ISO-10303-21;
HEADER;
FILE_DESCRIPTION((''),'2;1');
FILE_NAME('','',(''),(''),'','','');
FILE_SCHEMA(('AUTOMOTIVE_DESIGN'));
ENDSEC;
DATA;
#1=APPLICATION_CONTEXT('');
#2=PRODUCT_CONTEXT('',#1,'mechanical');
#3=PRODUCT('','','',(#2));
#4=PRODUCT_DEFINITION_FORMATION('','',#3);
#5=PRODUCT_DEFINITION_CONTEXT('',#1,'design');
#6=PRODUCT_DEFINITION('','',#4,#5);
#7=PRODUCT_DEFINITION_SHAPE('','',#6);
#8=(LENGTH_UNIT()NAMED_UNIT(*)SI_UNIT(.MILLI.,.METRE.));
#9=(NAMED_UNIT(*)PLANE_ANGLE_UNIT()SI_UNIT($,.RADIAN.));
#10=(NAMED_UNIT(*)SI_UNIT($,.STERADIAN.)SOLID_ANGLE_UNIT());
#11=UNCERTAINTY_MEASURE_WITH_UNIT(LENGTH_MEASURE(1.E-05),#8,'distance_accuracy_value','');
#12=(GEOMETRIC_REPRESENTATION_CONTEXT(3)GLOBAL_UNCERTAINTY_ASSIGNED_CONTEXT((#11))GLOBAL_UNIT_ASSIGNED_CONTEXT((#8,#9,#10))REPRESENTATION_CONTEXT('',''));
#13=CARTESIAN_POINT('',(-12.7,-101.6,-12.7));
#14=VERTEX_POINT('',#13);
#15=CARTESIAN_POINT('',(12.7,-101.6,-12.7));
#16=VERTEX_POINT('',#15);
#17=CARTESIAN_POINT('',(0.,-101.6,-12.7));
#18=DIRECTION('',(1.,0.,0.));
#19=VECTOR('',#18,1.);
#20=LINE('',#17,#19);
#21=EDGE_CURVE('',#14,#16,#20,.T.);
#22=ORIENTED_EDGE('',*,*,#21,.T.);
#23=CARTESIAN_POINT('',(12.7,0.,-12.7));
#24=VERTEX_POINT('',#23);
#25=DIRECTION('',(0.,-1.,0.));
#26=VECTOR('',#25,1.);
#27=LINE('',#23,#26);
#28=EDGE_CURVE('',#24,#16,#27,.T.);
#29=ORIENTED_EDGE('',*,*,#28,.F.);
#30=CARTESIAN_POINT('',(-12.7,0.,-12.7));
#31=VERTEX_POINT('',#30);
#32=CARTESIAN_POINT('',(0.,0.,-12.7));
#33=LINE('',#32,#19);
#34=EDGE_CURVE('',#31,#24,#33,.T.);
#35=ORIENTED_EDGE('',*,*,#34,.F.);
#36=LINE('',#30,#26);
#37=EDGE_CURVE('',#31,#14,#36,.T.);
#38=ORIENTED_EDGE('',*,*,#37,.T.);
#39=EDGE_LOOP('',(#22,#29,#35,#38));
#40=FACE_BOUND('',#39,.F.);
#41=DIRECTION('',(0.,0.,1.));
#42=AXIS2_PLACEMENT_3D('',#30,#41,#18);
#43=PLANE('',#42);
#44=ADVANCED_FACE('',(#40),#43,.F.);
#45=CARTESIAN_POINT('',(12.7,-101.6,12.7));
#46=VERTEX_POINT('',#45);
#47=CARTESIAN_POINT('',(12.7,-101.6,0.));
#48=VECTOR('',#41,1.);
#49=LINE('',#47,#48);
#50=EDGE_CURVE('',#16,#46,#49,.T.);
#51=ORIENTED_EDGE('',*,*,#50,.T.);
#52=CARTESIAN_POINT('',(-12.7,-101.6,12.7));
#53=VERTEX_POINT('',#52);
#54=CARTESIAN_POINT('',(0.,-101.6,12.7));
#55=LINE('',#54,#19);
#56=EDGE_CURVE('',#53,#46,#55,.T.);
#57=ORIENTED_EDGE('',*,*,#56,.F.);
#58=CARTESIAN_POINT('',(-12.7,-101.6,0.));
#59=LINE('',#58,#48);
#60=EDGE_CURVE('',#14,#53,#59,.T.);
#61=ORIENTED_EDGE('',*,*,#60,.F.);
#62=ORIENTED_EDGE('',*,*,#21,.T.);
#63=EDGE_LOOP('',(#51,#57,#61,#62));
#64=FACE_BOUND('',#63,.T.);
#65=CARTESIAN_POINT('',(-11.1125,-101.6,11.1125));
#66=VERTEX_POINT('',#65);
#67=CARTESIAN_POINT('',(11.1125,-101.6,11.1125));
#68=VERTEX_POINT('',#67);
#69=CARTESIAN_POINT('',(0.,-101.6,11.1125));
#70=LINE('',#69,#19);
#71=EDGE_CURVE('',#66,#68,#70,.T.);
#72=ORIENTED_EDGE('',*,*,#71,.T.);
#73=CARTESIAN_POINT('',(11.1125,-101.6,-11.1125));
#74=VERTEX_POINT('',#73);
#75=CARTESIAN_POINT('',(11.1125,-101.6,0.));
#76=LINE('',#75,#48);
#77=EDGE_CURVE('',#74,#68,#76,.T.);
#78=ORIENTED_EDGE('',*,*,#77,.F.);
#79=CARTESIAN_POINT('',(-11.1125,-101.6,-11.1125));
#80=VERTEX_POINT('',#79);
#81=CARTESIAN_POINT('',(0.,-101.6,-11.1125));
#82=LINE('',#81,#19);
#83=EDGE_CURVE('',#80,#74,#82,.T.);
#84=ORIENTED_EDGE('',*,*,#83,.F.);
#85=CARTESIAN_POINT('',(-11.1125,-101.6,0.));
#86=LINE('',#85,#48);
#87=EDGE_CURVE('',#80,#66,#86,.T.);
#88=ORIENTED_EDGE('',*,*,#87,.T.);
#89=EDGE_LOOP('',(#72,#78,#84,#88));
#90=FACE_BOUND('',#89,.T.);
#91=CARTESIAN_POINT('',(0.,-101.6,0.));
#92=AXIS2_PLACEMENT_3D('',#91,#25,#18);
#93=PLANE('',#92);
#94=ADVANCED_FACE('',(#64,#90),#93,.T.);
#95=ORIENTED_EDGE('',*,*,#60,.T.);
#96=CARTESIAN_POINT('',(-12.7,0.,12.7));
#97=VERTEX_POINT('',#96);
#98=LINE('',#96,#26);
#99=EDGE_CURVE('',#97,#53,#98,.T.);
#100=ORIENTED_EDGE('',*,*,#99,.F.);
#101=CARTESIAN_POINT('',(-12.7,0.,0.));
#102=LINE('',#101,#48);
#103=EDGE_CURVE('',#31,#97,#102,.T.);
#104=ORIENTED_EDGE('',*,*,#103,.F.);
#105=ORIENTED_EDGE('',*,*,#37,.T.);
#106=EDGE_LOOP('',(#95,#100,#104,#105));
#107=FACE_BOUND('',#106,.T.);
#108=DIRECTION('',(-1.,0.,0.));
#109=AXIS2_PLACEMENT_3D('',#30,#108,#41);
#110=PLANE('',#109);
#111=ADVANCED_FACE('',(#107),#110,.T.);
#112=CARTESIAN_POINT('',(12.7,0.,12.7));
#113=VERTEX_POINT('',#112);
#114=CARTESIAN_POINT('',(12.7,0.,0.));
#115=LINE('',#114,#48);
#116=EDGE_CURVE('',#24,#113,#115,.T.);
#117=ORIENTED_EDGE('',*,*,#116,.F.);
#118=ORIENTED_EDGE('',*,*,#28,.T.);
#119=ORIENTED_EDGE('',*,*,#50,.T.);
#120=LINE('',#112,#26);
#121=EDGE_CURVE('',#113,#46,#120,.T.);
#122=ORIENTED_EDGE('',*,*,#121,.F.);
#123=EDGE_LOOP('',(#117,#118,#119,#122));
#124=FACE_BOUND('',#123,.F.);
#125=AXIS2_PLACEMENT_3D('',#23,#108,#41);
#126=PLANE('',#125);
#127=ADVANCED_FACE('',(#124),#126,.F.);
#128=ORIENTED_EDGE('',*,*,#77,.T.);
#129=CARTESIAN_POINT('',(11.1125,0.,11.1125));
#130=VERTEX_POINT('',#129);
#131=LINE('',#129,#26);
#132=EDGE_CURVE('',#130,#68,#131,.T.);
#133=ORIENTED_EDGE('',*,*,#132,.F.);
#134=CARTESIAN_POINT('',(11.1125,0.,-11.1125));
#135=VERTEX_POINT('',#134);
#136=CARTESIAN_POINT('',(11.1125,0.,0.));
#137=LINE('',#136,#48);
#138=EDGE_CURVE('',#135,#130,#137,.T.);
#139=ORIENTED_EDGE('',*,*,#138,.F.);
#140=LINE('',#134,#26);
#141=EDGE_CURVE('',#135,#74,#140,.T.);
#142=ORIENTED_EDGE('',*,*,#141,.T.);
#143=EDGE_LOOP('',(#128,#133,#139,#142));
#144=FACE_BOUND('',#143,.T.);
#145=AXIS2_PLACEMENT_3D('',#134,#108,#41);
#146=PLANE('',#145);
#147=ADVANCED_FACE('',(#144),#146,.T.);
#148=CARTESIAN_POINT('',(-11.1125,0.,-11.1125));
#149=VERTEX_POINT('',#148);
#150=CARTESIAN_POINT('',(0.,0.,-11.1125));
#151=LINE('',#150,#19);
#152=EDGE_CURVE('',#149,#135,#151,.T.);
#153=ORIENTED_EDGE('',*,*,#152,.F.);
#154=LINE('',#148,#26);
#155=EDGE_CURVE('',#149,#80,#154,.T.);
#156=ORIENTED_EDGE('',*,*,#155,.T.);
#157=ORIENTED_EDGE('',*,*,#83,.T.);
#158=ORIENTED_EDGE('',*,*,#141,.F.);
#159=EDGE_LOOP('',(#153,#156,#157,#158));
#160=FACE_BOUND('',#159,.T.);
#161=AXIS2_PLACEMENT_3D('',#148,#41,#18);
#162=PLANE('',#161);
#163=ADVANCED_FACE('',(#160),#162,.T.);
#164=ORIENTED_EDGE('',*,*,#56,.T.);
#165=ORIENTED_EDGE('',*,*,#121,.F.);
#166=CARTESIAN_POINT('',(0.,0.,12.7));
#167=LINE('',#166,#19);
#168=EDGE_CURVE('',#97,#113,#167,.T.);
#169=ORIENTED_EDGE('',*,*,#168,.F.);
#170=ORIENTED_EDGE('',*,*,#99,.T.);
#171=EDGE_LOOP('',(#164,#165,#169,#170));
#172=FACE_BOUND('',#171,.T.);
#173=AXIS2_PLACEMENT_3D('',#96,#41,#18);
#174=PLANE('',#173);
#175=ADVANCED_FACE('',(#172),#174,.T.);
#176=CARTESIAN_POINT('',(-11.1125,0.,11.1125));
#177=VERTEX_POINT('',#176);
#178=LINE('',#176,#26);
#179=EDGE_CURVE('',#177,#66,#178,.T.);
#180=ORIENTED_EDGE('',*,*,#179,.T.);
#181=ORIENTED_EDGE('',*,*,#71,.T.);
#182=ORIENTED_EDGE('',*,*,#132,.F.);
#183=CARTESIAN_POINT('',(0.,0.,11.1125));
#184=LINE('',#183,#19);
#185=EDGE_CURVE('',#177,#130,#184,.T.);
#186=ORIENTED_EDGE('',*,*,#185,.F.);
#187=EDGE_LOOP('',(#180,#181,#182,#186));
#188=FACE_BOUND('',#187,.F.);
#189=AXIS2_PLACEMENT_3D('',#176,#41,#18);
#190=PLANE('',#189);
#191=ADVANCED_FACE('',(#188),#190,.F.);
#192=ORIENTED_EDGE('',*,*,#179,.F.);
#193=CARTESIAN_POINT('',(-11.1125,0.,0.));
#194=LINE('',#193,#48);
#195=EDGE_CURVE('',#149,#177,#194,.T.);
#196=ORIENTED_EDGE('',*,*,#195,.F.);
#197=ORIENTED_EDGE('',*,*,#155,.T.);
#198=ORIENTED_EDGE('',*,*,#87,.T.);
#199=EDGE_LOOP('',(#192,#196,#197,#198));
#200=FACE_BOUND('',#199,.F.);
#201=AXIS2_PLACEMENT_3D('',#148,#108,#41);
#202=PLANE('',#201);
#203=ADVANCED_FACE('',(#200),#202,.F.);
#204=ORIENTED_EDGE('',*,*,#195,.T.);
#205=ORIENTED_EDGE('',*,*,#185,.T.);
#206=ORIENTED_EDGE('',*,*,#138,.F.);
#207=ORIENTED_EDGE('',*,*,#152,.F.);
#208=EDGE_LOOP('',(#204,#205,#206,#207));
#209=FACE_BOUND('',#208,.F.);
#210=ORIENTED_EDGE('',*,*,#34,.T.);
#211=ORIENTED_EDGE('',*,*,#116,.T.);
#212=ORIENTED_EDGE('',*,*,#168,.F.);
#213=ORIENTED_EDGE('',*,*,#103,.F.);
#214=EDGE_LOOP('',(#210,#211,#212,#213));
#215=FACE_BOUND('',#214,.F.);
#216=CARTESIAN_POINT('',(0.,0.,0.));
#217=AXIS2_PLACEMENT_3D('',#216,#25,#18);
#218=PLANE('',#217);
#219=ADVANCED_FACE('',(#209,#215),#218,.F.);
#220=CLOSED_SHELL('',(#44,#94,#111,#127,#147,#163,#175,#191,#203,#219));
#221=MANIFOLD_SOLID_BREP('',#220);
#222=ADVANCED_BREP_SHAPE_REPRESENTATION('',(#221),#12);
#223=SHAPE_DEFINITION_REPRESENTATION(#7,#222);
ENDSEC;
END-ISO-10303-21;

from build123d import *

# Parameters (mm, degrees)
F1_W     = 25.4
F1_H     = 25.4
F1_W_2   = 22.225
F1_H_2   = 22.225
F2_DEPTH = 101.6


# Not quite as in the source:
# - a variable given as a bare number and used for a length is read in inches; the dataset says mm whatever the document's units were


with BuildPart() as f2:
    # F1 (on Front) → F2 (new body)
    with BuildSketch(Plane.XZ):
        Rectangle(F1_W, F1_H)
        Rectangle(F1_W_2, F1_H_2, mode=Mode.SUBTRACT)
    extrude(amount=F2_DEPTH)


solid = f2.part
